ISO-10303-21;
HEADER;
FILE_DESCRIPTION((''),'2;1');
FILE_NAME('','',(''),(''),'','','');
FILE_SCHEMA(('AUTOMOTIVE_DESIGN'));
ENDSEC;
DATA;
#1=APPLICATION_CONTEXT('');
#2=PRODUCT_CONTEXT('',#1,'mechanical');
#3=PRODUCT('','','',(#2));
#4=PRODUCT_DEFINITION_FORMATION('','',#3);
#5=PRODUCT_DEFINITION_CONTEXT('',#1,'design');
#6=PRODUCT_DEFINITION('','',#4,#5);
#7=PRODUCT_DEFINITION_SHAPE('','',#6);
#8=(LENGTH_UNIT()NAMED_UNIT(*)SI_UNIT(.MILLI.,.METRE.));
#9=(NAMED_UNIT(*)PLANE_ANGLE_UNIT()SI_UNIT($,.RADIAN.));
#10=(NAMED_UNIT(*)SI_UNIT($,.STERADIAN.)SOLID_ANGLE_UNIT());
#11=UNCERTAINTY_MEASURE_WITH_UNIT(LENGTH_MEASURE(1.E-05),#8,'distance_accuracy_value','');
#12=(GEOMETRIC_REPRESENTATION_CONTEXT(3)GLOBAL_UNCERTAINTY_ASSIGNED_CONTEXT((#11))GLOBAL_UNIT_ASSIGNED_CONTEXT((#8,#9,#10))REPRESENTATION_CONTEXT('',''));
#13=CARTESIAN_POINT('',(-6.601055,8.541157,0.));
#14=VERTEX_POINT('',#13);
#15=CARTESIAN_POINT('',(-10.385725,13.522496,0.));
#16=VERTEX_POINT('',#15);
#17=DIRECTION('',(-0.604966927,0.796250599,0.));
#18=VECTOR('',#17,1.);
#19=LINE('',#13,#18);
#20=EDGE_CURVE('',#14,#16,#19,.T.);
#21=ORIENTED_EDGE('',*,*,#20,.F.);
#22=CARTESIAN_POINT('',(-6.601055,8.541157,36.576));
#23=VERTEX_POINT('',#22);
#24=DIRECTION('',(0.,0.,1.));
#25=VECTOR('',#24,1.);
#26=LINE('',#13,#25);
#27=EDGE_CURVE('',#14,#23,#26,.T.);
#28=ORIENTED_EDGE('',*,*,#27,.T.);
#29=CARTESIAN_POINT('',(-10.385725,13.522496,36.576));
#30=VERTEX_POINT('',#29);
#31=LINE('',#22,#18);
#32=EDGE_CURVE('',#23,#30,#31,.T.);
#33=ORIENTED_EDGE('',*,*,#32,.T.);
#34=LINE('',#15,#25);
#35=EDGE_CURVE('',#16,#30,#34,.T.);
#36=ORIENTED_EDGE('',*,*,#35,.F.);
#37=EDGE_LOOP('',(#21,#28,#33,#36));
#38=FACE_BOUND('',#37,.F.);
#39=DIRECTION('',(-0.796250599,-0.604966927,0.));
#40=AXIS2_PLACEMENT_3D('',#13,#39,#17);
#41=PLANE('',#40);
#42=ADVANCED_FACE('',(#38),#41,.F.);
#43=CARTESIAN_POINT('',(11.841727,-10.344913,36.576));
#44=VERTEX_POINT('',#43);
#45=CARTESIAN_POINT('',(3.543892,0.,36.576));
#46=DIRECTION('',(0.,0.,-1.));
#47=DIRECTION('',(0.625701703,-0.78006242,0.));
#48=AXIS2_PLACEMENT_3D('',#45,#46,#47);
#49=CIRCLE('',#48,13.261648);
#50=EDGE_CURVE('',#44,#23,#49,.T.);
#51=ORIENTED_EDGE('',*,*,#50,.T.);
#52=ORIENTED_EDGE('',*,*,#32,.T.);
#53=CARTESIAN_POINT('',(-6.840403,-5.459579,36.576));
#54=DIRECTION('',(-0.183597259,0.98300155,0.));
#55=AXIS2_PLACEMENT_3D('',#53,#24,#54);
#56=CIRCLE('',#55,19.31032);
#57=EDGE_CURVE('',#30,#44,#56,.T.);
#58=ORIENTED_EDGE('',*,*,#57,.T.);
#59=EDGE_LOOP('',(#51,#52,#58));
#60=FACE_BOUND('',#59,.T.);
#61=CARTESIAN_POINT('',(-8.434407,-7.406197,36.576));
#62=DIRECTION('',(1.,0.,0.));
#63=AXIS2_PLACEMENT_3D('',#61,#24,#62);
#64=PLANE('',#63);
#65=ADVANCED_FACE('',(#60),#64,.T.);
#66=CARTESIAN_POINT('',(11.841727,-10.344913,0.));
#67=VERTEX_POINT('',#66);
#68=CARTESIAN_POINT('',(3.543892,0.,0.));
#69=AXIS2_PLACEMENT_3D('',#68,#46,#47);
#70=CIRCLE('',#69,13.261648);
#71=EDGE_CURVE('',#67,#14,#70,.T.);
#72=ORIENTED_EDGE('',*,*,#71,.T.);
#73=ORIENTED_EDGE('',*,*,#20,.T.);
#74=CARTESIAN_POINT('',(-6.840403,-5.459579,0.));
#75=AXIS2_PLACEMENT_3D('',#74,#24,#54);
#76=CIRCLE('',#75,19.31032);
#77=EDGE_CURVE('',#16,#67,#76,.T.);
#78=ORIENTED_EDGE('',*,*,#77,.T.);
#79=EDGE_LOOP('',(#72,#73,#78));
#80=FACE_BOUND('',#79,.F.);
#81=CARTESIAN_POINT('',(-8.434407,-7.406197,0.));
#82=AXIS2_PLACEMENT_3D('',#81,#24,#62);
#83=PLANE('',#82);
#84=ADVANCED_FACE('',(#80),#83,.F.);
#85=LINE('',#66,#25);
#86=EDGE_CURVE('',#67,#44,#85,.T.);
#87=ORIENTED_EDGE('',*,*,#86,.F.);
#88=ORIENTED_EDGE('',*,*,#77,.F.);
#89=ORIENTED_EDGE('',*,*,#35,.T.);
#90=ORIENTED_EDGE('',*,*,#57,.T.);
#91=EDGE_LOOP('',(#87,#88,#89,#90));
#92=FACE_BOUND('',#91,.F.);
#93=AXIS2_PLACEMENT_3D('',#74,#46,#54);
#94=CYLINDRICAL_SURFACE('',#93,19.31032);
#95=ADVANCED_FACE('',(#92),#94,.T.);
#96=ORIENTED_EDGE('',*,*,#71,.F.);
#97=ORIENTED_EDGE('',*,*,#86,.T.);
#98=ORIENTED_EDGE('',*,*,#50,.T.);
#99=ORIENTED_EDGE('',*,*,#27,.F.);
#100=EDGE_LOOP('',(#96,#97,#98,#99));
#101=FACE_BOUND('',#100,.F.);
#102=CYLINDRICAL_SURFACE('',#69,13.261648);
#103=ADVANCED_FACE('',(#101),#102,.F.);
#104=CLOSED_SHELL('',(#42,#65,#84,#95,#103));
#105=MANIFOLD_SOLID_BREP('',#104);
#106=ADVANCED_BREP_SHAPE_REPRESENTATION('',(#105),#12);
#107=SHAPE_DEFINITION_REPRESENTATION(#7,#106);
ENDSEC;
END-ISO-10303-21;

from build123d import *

# Parameters (mm, degrees)
F1_DEPTH = 36.576


with BuildPart() as f1:
    # F0 (on Top) → F1 (new body)
    with BuildSketch(Plane.XY):
        with BuildLine():
            ThreePointArc((11.8417274365, -10.3449132075), (-5.9441989082, -9.2653895435), (-6.6010553203, 8.5411566385))
            Line((-6.6010553203, 8.5411566385), (-10.3857247159, 13.5224955156))
            ThreePointArc((-10.3857247159, 13.5224955156), (-20.9717170118, -18.619915096), (11.8417274365, -10.3449132075))
        make_face()
    extrude(amount=F1_DEPTH)


solid = f1.part
